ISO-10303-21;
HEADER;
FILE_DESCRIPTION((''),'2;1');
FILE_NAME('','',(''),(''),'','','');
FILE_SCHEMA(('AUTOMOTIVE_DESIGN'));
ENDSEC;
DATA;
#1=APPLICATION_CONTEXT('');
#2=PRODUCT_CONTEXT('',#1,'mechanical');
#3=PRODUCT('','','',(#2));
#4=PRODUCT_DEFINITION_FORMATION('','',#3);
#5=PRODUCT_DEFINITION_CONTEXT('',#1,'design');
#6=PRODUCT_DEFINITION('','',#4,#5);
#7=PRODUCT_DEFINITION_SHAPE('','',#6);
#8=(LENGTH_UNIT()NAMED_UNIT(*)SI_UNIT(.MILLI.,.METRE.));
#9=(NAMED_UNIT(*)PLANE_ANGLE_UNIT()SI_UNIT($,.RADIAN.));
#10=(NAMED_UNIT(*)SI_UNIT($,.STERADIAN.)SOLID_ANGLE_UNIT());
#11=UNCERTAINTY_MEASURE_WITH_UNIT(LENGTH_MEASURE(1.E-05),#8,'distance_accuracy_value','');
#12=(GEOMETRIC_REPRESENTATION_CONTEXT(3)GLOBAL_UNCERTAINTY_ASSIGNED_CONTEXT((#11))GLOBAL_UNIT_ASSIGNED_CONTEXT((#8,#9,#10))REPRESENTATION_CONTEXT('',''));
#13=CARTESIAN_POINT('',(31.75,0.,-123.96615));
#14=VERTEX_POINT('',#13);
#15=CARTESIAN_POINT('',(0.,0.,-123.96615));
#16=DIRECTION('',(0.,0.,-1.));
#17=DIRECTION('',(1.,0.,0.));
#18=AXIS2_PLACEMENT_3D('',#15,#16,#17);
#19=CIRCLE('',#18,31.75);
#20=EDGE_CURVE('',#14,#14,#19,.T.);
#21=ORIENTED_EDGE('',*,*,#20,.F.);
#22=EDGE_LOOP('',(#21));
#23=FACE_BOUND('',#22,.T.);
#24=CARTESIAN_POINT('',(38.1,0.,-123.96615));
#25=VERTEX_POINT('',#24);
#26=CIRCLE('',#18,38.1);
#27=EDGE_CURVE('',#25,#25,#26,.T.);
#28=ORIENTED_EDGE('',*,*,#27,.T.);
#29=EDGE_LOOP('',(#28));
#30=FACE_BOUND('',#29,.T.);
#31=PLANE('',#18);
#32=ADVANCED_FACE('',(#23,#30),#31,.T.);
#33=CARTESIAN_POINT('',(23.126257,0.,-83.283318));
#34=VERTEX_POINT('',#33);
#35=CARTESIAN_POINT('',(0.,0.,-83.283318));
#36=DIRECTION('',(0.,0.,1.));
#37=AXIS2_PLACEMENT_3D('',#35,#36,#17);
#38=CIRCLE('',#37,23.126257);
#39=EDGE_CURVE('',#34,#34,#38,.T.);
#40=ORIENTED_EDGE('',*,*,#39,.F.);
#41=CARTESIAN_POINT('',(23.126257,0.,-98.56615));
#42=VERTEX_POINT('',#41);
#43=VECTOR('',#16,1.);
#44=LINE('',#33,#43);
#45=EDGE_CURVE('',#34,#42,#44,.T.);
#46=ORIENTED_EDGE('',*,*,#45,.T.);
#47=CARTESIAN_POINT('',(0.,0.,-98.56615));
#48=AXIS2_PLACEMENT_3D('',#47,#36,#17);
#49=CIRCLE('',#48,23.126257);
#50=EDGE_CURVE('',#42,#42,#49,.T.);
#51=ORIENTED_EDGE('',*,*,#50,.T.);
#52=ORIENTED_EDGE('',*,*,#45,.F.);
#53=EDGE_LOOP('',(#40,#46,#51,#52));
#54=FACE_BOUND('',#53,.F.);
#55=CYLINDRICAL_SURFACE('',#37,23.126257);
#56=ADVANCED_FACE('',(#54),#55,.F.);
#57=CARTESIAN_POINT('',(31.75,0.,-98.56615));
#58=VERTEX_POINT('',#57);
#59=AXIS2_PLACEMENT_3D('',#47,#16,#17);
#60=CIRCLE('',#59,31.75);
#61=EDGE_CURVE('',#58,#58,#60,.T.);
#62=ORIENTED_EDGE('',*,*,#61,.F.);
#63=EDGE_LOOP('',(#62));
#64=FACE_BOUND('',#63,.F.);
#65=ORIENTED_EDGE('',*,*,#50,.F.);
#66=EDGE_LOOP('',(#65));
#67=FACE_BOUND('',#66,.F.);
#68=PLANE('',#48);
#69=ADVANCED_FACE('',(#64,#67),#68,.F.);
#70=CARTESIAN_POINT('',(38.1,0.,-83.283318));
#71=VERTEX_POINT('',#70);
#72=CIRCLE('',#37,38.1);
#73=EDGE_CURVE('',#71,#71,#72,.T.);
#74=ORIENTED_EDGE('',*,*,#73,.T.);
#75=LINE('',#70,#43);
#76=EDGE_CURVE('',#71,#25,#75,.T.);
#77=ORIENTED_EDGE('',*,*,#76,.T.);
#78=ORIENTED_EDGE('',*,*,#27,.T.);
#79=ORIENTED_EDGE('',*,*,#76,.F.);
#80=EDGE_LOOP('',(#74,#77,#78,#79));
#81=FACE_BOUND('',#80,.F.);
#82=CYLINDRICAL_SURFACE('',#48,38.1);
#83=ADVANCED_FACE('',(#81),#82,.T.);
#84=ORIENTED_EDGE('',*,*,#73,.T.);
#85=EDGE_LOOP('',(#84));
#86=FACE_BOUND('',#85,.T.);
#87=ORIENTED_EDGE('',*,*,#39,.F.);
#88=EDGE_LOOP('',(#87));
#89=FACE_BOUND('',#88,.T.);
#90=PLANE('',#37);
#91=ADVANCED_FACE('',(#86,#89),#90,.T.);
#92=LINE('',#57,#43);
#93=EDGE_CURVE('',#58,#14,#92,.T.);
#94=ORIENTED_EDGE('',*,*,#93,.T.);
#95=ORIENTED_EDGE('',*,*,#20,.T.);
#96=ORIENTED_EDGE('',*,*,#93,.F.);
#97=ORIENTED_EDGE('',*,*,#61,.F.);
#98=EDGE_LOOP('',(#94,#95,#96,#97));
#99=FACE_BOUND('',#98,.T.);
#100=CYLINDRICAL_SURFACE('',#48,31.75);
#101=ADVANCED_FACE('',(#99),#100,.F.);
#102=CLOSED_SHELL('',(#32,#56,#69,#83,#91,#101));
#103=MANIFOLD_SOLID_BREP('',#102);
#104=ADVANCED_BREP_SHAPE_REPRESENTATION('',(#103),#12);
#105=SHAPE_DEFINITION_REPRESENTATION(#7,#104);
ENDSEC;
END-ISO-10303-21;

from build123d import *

# Parameters (mm, degrees)
F1_R     = 38.1
F2_DEPTH = 15.2828320861
F3_R     = 23.1262571724
F4_DEPTH = 25.4
F5_R     = 38.1
F5_R_2   = 31.75
F6_DEPTH = 25.4


# Not quite as in the source:
# - a feature names something its author has since deleted; it is built from what else it names


with BuildPart() as f2:
    # F1 (on offset) → F2 (new body)
    with BuildSketch(Plane.XY.offset(-83.2833182067)):
        Circle(F1_R)
    extrude(amount=-F2_DEPTH)

    # F3 (on face) → F4 (cut)
    with BuildSketch(Plane.XY.offset(-83.2833182067)):
        Circle(F3_R)
    extrude(amount=-F4_DEPTH, mode=Mode.SUBTRACT)

    # F5 (on face) → F6 (join)
    with BuildSketch(Plane(origin=(0, 0, -98.5661502928), x_dir=(1, 0, 0), z_dir=(0, 0, -1))):
        Circle(F5_R)
        Circle(F5_R_2, mode=Mode.SUBTRACT)
    extrude(amount=F6_DEPTH)


solid = f2.part
